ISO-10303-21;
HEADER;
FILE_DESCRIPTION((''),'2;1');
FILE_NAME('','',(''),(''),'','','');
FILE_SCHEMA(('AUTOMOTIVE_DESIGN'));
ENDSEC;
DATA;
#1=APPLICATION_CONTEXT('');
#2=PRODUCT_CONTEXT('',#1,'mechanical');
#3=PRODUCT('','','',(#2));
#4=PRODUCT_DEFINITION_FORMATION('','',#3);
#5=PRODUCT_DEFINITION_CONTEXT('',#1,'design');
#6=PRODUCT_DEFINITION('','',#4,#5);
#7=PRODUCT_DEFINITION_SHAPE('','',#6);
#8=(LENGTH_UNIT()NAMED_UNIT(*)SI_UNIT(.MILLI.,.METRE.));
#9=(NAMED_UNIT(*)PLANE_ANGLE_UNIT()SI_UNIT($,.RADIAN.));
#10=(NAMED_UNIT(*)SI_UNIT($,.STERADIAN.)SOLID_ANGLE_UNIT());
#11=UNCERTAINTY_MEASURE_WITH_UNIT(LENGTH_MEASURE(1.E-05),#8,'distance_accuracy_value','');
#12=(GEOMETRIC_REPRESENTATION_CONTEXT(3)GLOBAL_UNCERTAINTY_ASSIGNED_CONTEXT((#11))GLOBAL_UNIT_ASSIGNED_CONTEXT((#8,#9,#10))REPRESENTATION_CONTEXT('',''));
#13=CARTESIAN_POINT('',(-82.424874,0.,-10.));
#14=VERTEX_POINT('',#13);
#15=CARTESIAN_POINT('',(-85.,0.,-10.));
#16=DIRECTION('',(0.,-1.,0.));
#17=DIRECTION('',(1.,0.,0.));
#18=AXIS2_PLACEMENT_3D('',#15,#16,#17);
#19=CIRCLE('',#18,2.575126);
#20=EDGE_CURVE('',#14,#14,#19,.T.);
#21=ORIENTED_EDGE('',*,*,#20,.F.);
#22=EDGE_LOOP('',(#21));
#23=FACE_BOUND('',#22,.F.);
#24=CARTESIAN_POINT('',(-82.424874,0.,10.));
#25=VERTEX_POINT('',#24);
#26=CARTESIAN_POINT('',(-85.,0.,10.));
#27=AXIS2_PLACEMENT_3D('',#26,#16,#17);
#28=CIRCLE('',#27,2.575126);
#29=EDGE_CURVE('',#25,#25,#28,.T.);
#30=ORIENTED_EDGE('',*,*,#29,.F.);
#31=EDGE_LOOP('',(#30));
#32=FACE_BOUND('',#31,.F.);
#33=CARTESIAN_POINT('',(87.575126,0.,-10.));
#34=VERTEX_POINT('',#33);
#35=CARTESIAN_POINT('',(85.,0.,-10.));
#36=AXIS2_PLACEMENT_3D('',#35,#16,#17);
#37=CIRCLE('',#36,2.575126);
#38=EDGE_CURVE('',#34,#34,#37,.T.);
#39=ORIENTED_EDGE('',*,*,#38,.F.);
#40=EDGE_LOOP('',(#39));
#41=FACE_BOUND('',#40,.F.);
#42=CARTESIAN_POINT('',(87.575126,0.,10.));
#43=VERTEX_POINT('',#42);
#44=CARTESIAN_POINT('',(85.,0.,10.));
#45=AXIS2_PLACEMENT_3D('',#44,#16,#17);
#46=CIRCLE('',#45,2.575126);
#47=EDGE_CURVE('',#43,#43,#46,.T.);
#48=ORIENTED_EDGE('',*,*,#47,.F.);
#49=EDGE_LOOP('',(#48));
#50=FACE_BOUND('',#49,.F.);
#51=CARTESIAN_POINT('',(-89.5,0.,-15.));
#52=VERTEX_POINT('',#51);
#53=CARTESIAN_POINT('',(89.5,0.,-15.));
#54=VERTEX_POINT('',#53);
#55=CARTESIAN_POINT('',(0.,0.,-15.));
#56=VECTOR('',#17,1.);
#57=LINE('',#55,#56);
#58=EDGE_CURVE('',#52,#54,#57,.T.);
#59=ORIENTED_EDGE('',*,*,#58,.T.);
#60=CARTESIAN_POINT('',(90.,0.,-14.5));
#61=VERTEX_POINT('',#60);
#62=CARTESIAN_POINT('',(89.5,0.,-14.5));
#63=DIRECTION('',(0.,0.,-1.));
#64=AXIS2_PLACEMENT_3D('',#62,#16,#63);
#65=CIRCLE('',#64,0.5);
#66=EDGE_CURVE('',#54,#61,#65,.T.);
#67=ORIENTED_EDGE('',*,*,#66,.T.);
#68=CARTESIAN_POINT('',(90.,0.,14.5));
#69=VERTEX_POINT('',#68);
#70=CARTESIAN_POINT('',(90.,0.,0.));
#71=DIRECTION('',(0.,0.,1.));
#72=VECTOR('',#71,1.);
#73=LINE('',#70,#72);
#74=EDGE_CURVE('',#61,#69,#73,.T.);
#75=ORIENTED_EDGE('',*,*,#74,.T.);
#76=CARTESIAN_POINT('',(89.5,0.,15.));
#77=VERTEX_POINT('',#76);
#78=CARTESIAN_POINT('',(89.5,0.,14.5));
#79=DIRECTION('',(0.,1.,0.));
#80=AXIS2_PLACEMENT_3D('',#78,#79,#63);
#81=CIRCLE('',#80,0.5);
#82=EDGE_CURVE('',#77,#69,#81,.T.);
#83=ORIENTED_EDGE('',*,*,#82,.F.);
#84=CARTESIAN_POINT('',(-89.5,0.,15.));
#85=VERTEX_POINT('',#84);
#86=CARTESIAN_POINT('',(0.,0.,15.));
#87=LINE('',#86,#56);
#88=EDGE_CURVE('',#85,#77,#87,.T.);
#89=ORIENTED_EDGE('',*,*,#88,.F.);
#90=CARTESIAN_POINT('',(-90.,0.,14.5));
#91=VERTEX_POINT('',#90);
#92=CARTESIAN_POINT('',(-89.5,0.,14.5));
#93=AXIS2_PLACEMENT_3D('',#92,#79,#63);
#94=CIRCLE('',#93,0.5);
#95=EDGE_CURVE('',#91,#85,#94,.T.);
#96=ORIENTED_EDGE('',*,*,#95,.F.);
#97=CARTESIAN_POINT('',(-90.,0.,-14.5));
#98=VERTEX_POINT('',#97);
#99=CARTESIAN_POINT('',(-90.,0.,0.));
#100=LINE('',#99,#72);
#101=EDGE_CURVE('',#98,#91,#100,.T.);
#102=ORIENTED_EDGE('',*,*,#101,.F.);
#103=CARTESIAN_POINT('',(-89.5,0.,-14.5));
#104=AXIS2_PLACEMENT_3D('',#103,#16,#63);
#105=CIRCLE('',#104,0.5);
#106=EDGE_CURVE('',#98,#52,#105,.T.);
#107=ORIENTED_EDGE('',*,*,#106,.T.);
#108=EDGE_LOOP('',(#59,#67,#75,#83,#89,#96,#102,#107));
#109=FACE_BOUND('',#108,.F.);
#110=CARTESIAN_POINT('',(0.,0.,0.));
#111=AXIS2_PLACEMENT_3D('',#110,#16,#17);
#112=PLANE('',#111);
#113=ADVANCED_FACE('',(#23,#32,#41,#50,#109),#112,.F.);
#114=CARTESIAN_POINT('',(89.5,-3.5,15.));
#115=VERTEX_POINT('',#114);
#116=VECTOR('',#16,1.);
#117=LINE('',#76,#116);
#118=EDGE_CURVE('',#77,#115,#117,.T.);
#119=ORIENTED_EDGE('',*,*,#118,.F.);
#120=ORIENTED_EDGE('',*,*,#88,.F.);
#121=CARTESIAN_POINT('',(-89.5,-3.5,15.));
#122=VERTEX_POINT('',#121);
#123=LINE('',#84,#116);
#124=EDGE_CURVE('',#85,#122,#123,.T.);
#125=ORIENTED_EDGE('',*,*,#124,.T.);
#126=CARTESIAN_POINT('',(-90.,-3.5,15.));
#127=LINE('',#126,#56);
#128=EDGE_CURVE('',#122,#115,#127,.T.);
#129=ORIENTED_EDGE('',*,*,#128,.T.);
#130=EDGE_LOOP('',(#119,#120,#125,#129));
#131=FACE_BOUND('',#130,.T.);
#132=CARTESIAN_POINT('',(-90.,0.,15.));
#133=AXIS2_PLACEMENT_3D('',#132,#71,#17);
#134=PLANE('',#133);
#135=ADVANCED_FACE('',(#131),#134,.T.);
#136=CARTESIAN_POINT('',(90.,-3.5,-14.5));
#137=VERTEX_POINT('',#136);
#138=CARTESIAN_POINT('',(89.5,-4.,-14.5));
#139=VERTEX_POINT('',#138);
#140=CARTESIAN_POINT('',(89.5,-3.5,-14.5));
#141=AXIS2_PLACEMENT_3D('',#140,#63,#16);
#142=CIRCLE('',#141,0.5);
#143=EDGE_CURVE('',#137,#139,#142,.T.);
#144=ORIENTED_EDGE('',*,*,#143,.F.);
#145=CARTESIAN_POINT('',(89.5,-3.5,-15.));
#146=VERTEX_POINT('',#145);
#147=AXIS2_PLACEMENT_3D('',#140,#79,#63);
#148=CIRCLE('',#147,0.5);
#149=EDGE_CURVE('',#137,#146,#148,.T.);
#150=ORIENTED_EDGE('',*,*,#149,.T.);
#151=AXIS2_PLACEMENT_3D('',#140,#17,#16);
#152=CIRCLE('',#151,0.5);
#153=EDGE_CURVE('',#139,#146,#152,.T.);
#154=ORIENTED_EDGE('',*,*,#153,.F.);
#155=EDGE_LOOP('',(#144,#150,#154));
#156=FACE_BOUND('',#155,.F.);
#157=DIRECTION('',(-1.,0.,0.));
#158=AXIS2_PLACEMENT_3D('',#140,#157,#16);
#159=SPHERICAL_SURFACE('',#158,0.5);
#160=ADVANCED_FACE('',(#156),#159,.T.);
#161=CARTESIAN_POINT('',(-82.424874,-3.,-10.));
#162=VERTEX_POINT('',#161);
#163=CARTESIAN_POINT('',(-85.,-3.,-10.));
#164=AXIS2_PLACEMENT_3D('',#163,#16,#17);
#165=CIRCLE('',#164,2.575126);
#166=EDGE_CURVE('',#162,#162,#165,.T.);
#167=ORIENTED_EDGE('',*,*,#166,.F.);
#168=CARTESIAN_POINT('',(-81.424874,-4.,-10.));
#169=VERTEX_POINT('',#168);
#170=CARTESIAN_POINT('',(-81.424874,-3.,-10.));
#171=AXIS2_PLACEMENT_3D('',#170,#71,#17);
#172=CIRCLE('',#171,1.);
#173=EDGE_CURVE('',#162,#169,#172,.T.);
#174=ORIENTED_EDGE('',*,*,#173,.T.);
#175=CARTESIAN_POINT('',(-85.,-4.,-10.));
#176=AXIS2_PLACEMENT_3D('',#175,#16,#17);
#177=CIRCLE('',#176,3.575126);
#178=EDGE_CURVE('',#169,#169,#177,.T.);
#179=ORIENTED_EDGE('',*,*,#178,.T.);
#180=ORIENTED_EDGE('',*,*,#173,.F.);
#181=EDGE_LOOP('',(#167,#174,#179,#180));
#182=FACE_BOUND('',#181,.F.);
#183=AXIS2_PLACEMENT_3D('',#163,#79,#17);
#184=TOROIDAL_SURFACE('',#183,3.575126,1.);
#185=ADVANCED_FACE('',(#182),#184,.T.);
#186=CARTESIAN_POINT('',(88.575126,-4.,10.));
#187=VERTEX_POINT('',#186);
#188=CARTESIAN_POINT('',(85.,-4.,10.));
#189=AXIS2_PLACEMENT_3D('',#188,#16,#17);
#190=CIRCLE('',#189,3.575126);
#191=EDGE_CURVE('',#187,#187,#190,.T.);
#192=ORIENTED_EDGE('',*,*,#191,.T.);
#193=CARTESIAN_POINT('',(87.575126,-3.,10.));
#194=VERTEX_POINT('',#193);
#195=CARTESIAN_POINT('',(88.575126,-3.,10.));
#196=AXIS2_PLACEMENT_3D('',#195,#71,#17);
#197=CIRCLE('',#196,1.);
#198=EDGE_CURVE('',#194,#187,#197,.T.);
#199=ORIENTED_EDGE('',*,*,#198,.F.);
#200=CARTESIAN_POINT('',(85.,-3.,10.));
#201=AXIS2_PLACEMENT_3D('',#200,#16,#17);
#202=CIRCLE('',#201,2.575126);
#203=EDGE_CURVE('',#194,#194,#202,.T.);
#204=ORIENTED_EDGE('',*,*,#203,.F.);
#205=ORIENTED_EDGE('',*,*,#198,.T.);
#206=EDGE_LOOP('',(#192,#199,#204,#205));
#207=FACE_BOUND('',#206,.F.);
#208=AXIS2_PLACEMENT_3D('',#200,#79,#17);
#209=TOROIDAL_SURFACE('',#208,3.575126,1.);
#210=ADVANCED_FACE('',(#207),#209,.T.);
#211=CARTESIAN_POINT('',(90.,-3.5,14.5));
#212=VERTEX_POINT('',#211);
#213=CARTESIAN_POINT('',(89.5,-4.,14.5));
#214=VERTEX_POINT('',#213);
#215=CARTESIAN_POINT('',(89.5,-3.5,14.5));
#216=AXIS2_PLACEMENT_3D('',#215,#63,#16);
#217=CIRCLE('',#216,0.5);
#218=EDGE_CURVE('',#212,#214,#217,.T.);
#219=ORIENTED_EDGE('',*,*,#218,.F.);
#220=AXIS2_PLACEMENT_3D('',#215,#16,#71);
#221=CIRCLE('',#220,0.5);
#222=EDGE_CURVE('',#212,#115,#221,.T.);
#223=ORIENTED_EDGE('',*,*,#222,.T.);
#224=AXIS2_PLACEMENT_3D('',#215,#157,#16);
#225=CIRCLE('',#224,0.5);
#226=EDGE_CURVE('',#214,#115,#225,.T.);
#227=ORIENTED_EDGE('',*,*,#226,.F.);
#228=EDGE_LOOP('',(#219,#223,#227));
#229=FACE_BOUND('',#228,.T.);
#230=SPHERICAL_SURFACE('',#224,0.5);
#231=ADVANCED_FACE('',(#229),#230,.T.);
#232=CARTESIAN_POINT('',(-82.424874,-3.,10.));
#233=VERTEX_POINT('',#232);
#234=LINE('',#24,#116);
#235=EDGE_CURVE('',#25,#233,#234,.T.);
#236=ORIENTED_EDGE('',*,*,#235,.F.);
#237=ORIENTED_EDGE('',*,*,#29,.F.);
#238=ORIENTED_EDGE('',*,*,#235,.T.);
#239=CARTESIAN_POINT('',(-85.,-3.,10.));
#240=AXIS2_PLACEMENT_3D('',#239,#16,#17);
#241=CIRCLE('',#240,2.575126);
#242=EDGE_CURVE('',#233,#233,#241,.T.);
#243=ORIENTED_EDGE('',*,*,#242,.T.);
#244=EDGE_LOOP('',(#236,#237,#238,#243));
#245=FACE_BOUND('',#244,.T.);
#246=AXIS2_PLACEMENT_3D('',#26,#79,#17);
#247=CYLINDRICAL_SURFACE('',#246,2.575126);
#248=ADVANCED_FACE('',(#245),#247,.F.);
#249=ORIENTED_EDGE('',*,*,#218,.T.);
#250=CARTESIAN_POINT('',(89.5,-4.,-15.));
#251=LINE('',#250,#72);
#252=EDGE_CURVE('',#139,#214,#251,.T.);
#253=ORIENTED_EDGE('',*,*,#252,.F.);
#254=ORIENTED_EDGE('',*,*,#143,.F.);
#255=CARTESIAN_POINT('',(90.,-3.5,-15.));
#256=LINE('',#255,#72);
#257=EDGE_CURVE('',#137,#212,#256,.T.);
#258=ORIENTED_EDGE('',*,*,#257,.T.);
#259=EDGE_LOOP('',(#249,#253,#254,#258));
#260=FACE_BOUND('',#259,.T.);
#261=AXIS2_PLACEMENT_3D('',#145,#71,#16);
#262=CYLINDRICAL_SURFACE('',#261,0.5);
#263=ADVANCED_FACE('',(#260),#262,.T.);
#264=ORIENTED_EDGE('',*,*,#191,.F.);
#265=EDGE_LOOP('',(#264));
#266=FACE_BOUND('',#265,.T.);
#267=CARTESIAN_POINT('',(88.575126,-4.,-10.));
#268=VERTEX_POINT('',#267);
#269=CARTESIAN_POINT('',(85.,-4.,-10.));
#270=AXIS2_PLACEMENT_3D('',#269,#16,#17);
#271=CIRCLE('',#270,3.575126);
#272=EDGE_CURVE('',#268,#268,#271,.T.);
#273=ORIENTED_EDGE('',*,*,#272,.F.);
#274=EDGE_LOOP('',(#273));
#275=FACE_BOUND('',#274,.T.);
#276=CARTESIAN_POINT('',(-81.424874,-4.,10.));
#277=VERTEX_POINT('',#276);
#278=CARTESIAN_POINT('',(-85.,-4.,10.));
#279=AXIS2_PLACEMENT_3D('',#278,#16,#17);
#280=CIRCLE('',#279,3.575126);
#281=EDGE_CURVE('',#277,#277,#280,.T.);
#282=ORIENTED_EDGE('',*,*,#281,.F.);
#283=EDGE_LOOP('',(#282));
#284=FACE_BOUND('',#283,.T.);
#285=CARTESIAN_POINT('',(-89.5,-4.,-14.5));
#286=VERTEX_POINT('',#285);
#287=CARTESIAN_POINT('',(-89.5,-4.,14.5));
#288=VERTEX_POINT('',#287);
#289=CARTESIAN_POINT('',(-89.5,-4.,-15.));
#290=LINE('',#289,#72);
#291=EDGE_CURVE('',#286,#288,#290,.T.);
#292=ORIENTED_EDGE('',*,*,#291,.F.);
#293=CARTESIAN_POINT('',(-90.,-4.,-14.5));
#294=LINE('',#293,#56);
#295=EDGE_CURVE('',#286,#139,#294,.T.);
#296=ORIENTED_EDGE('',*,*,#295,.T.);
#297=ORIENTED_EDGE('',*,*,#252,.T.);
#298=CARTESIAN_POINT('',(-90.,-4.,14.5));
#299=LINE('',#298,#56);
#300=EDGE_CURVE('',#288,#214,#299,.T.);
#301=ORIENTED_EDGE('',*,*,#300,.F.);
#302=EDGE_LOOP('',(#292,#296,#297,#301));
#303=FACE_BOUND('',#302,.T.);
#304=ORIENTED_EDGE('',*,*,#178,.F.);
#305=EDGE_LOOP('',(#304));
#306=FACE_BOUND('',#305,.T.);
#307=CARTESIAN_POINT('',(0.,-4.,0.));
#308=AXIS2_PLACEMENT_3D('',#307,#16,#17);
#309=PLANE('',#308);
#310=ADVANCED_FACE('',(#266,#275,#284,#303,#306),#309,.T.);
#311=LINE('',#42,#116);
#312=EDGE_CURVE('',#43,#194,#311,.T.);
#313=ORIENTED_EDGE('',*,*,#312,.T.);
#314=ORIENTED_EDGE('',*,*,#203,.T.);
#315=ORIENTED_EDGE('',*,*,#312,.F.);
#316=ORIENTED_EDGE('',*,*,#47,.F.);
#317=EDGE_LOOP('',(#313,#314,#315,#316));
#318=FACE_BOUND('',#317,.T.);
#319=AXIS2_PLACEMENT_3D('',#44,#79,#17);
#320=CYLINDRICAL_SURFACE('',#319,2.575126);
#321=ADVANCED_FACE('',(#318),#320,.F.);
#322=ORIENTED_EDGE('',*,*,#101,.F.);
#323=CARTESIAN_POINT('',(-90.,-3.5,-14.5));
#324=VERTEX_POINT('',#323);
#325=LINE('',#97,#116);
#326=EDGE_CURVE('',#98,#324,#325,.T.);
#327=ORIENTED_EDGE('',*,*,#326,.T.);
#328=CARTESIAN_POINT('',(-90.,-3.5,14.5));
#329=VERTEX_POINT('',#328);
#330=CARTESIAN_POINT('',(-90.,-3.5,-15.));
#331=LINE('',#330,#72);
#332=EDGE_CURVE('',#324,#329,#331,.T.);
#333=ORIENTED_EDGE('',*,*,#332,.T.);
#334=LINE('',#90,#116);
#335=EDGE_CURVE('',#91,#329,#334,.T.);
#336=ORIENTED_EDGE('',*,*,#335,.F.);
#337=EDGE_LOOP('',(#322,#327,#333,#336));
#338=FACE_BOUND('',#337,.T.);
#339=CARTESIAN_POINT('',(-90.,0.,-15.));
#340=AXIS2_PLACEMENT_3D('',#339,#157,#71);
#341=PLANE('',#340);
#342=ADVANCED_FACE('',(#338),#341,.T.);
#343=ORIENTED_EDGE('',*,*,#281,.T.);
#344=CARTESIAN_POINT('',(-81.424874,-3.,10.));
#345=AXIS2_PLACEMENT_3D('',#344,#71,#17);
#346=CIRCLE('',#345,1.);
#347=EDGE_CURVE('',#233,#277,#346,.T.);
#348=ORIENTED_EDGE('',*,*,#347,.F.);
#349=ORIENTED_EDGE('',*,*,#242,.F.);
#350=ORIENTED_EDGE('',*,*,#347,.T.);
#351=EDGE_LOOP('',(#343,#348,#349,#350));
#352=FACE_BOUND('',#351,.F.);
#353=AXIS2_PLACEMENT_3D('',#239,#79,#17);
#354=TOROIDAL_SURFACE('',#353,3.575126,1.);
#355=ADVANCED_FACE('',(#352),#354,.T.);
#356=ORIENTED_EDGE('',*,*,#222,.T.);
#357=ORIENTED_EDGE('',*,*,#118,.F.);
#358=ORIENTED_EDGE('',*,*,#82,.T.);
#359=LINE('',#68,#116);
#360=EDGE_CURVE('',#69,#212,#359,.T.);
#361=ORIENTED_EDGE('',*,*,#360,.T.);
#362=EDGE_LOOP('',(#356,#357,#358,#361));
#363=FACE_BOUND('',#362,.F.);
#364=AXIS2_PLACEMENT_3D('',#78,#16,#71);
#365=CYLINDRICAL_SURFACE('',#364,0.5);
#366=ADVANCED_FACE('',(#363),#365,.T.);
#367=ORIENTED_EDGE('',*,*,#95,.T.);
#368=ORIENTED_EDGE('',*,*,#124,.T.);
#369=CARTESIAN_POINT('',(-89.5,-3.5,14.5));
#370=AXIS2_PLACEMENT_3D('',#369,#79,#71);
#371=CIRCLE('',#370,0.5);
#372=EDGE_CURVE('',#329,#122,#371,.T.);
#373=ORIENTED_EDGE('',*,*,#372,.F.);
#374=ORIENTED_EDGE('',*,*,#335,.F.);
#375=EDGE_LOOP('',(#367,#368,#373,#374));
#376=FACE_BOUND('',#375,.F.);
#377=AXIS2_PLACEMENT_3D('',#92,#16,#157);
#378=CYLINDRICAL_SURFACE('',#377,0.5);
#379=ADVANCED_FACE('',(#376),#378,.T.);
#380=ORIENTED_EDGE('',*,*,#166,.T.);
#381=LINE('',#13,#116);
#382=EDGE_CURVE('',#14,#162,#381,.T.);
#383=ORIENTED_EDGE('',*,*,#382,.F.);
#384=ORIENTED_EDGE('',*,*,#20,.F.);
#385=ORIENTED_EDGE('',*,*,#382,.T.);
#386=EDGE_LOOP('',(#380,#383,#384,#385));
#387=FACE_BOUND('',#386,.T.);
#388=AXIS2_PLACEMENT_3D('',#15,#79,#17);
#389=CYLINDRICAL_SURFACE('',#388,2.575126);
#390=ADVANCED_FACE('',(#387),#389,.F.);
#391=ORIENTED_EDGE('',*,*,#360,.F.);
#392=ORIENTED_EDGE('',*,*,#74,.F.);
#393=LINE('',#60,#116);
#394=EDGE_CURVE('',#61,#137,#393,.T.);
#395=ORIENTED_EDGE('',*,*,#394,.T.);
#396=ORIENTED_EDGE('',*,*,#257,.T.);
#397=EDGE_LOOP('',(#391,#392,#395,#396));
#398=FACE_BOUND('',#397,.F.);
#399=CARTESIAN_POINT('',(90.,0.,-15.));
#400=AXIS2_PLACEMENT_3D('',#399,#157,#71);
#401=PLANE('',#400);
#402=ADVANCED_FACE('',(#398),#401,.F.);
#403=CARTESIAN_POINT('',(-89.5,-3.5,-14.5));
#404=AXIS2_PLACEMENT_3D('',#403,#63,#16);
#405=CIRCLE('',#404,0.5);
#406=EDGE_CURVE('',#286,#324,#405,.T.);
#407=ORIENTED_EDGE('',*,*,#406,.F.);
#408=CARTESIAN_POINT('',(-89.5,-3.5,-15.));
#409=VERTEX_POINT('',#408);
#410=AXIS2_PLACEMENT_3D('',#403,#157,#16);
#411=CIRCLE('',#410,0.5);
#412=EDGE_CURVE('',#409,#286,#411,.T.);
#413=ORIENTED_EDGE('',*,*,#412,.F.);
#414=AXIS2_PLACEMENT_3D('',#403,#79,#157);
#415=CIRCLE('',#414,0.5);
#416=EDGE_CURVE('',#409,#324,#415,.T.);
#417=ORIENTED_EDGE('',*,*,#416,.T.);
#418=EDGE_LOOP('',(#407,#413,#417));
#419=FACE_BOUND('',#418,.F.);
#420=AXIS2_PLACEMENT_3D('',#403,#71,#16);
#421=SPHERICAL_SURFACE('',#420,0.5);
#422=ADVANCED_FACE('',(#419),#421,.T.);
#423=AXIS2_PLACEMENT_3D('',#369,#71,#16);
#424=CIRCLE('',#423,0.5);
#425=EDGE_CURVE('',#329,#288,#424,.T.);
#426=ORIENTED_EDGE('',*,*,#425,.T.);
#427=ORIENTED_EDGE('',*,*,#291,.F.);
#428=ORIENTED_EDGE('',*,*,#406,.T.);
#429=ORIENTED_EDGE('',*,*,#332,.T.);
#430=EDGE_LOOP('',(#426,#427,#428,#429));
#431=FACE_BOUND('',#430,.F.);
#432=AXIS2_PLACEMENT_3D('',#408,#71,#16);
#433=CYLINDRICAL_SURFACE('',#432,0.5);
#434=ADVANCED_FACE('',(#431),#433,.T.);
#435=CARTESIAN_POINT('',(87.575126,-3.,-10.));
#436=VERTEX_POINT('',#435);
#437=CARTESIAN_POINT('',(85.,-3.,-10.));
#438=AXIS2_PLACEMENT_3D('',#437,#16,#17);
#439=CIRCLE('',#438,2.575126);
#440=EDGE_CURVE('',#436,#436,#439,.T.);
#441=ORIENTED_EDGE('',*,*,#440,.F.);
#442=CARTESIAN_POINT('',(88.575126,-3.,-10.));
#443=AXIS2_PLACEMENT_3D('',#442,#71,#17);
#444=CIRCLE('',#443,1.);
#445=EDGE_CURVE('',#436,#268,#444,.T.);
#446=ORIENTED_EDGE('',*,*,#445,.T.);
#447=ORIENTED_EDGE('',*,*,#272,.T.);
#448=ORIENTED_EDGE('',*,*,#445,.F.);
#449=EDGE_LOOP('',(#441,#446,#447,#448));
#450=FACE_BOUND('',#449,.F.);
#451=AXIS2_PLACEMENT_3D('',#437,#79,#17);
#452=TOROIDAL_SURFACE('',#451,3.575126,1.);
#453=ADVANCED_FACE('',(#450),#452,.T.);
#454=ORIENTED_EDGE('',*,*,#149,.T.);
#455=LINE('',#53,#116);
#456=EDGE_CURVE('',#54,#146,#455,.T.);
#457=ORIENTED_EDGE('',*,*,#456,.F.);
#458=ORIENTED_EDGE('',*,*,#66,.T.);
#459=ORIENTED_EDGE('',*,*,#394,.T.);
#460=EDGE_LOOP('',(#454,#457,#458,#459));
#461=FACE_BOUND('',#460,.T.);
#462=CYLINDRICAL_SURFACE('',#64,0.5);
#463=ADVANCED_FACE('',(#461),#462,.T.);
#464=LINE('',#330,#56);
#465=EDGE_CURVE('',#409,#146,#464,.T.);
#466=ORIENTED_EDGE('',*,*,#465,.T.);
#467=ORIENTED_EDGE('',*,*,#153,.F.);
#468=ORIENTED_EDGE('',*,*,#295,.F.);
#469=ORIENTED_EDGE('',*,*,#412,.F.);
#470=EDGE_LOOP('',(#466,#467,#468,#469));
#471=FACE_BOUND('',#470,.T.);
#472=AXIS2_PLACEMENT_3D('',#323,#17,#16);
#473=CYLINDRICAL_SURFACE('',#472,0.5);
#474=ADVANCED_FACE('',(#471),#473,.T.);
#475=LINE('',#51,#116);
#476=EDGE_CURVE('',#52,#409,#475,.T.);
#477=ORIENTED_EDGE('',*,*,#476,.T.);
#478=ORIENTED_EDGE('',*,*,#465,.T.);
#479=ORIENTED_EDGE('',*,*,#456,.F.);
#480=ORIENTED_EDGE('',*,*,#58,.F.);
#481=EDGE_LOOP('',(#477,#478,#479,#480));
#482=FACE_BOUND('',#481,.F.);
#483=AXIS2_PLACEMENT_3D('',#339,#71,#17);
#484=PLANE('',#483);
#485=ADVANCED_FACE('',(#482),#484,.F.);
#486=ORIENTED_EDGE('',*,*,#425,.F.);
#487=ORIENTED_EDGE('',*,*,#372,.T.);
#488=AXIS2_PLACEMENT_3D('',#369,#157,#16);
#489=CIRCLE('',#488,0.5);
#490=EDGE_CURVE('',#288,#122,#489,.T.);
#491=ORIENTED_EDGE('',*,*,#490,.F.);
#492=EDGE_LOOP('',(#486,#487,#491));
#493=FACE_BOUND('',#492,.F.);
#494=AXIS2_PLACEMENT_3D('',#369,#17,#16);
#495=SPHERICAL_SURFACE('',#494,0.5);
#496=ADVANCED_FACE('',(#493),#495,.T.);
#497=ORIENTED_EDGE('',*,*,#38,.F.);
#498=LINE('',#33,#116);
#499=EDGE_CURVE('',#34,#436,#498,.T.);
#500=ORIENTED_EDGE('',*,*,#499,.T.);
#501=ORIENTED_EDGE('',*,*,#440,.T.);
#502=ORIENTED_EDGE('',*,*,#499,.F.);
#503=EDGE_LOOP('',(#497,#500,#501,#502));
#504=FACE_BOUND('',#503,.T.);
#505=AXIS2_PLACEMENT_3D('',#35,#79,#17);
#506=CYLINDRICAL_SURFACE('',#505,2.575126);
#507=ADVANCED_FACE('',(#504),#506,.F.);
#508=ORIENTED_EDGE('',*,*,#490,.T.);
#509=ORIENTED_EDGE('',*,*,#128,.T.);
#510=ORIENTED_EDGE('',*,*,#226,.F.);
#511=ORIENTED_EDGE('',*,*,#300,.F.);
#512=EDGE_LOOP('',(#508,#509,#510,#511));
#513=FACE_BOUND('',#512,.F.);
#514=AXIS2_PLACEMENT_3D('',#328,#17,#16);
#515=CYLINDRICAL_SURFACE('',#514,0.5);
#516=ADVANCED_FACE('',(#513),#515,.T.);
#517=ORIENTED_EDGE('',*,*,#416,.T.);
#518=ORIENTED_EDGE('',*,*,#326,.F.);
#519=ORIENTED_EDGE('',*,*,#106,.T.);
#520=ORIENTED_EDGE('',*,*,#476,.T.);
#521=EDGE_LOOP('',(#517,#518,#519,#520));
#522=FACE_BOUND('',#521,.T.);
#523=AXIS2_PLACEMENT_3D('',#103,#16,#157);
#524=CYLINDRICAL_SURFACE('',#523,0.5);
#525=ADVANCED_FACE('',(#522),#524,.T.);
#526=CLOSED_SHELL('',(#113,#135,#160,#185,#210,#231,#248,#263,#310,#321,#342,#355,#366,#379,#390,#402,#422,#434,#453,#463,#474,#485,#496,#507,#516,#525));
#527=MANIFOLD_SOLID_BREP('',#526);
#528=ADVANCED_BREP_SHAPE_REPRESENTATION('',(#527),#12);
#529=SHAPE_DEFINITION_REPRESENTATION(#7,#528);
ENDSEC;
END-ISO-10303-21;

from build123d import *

# Parameters (mm, degrees)
F0_W     = 180
F0_H     = 30
F0_R     = 2.5751263091
F1_DEPTH = 4
F2_R     = 1
F3_R     = 0.5


# Not quite as in the source:
# - a feature names something its author has since deleted; it is built from what else it names


with BuildPart() as f1:
    # F0 (on Front) → F1 (new body)
    with BuildSketch(Plane.XZ):
        Rectangle(F0_W, F0_H)
        with Locations((-85, -10)):
            Circle(F0_R, mode=Mode.SUBTRACT)
        with Locations((85, -10)):
            Circle(F0_R, mode=Mode.SUBTRACT)
        with Locations((-85, 10)):
            Circle(F0_R, mode=Mode.SUBTRACT)
        with Locations((85, 10)):
            Circle(F0_R, mode=Mode.SUBTRACT)
    extrude(amount=F1_DEPTH)

    # F2
    f2_edges = [f1.edges().sort_by_distance(p)[0] for p in [
        (-87.575126, -4, 10),
        (-87.575126, -4, -10),
        (82.424874, -4, 10),
        (82.424874, -4, -10),
    ]]
    fillet(f2_edges, radius=F2_R)

    # F3
    f3_edges = [f1.edges().sort_by_distance(p)[0] for p in [
        (0, -4, 15),
        (-90, -4, 0),
        (0, -4, -15),
        (90, -4, 0),
        (-90, -2, 15),
        (-90, -2, -15),
        (90, -2, 15),
        (90, -2, -15),
    ]]
    fillet(f3_edges, radius=F3_R)


solid = f1.part
